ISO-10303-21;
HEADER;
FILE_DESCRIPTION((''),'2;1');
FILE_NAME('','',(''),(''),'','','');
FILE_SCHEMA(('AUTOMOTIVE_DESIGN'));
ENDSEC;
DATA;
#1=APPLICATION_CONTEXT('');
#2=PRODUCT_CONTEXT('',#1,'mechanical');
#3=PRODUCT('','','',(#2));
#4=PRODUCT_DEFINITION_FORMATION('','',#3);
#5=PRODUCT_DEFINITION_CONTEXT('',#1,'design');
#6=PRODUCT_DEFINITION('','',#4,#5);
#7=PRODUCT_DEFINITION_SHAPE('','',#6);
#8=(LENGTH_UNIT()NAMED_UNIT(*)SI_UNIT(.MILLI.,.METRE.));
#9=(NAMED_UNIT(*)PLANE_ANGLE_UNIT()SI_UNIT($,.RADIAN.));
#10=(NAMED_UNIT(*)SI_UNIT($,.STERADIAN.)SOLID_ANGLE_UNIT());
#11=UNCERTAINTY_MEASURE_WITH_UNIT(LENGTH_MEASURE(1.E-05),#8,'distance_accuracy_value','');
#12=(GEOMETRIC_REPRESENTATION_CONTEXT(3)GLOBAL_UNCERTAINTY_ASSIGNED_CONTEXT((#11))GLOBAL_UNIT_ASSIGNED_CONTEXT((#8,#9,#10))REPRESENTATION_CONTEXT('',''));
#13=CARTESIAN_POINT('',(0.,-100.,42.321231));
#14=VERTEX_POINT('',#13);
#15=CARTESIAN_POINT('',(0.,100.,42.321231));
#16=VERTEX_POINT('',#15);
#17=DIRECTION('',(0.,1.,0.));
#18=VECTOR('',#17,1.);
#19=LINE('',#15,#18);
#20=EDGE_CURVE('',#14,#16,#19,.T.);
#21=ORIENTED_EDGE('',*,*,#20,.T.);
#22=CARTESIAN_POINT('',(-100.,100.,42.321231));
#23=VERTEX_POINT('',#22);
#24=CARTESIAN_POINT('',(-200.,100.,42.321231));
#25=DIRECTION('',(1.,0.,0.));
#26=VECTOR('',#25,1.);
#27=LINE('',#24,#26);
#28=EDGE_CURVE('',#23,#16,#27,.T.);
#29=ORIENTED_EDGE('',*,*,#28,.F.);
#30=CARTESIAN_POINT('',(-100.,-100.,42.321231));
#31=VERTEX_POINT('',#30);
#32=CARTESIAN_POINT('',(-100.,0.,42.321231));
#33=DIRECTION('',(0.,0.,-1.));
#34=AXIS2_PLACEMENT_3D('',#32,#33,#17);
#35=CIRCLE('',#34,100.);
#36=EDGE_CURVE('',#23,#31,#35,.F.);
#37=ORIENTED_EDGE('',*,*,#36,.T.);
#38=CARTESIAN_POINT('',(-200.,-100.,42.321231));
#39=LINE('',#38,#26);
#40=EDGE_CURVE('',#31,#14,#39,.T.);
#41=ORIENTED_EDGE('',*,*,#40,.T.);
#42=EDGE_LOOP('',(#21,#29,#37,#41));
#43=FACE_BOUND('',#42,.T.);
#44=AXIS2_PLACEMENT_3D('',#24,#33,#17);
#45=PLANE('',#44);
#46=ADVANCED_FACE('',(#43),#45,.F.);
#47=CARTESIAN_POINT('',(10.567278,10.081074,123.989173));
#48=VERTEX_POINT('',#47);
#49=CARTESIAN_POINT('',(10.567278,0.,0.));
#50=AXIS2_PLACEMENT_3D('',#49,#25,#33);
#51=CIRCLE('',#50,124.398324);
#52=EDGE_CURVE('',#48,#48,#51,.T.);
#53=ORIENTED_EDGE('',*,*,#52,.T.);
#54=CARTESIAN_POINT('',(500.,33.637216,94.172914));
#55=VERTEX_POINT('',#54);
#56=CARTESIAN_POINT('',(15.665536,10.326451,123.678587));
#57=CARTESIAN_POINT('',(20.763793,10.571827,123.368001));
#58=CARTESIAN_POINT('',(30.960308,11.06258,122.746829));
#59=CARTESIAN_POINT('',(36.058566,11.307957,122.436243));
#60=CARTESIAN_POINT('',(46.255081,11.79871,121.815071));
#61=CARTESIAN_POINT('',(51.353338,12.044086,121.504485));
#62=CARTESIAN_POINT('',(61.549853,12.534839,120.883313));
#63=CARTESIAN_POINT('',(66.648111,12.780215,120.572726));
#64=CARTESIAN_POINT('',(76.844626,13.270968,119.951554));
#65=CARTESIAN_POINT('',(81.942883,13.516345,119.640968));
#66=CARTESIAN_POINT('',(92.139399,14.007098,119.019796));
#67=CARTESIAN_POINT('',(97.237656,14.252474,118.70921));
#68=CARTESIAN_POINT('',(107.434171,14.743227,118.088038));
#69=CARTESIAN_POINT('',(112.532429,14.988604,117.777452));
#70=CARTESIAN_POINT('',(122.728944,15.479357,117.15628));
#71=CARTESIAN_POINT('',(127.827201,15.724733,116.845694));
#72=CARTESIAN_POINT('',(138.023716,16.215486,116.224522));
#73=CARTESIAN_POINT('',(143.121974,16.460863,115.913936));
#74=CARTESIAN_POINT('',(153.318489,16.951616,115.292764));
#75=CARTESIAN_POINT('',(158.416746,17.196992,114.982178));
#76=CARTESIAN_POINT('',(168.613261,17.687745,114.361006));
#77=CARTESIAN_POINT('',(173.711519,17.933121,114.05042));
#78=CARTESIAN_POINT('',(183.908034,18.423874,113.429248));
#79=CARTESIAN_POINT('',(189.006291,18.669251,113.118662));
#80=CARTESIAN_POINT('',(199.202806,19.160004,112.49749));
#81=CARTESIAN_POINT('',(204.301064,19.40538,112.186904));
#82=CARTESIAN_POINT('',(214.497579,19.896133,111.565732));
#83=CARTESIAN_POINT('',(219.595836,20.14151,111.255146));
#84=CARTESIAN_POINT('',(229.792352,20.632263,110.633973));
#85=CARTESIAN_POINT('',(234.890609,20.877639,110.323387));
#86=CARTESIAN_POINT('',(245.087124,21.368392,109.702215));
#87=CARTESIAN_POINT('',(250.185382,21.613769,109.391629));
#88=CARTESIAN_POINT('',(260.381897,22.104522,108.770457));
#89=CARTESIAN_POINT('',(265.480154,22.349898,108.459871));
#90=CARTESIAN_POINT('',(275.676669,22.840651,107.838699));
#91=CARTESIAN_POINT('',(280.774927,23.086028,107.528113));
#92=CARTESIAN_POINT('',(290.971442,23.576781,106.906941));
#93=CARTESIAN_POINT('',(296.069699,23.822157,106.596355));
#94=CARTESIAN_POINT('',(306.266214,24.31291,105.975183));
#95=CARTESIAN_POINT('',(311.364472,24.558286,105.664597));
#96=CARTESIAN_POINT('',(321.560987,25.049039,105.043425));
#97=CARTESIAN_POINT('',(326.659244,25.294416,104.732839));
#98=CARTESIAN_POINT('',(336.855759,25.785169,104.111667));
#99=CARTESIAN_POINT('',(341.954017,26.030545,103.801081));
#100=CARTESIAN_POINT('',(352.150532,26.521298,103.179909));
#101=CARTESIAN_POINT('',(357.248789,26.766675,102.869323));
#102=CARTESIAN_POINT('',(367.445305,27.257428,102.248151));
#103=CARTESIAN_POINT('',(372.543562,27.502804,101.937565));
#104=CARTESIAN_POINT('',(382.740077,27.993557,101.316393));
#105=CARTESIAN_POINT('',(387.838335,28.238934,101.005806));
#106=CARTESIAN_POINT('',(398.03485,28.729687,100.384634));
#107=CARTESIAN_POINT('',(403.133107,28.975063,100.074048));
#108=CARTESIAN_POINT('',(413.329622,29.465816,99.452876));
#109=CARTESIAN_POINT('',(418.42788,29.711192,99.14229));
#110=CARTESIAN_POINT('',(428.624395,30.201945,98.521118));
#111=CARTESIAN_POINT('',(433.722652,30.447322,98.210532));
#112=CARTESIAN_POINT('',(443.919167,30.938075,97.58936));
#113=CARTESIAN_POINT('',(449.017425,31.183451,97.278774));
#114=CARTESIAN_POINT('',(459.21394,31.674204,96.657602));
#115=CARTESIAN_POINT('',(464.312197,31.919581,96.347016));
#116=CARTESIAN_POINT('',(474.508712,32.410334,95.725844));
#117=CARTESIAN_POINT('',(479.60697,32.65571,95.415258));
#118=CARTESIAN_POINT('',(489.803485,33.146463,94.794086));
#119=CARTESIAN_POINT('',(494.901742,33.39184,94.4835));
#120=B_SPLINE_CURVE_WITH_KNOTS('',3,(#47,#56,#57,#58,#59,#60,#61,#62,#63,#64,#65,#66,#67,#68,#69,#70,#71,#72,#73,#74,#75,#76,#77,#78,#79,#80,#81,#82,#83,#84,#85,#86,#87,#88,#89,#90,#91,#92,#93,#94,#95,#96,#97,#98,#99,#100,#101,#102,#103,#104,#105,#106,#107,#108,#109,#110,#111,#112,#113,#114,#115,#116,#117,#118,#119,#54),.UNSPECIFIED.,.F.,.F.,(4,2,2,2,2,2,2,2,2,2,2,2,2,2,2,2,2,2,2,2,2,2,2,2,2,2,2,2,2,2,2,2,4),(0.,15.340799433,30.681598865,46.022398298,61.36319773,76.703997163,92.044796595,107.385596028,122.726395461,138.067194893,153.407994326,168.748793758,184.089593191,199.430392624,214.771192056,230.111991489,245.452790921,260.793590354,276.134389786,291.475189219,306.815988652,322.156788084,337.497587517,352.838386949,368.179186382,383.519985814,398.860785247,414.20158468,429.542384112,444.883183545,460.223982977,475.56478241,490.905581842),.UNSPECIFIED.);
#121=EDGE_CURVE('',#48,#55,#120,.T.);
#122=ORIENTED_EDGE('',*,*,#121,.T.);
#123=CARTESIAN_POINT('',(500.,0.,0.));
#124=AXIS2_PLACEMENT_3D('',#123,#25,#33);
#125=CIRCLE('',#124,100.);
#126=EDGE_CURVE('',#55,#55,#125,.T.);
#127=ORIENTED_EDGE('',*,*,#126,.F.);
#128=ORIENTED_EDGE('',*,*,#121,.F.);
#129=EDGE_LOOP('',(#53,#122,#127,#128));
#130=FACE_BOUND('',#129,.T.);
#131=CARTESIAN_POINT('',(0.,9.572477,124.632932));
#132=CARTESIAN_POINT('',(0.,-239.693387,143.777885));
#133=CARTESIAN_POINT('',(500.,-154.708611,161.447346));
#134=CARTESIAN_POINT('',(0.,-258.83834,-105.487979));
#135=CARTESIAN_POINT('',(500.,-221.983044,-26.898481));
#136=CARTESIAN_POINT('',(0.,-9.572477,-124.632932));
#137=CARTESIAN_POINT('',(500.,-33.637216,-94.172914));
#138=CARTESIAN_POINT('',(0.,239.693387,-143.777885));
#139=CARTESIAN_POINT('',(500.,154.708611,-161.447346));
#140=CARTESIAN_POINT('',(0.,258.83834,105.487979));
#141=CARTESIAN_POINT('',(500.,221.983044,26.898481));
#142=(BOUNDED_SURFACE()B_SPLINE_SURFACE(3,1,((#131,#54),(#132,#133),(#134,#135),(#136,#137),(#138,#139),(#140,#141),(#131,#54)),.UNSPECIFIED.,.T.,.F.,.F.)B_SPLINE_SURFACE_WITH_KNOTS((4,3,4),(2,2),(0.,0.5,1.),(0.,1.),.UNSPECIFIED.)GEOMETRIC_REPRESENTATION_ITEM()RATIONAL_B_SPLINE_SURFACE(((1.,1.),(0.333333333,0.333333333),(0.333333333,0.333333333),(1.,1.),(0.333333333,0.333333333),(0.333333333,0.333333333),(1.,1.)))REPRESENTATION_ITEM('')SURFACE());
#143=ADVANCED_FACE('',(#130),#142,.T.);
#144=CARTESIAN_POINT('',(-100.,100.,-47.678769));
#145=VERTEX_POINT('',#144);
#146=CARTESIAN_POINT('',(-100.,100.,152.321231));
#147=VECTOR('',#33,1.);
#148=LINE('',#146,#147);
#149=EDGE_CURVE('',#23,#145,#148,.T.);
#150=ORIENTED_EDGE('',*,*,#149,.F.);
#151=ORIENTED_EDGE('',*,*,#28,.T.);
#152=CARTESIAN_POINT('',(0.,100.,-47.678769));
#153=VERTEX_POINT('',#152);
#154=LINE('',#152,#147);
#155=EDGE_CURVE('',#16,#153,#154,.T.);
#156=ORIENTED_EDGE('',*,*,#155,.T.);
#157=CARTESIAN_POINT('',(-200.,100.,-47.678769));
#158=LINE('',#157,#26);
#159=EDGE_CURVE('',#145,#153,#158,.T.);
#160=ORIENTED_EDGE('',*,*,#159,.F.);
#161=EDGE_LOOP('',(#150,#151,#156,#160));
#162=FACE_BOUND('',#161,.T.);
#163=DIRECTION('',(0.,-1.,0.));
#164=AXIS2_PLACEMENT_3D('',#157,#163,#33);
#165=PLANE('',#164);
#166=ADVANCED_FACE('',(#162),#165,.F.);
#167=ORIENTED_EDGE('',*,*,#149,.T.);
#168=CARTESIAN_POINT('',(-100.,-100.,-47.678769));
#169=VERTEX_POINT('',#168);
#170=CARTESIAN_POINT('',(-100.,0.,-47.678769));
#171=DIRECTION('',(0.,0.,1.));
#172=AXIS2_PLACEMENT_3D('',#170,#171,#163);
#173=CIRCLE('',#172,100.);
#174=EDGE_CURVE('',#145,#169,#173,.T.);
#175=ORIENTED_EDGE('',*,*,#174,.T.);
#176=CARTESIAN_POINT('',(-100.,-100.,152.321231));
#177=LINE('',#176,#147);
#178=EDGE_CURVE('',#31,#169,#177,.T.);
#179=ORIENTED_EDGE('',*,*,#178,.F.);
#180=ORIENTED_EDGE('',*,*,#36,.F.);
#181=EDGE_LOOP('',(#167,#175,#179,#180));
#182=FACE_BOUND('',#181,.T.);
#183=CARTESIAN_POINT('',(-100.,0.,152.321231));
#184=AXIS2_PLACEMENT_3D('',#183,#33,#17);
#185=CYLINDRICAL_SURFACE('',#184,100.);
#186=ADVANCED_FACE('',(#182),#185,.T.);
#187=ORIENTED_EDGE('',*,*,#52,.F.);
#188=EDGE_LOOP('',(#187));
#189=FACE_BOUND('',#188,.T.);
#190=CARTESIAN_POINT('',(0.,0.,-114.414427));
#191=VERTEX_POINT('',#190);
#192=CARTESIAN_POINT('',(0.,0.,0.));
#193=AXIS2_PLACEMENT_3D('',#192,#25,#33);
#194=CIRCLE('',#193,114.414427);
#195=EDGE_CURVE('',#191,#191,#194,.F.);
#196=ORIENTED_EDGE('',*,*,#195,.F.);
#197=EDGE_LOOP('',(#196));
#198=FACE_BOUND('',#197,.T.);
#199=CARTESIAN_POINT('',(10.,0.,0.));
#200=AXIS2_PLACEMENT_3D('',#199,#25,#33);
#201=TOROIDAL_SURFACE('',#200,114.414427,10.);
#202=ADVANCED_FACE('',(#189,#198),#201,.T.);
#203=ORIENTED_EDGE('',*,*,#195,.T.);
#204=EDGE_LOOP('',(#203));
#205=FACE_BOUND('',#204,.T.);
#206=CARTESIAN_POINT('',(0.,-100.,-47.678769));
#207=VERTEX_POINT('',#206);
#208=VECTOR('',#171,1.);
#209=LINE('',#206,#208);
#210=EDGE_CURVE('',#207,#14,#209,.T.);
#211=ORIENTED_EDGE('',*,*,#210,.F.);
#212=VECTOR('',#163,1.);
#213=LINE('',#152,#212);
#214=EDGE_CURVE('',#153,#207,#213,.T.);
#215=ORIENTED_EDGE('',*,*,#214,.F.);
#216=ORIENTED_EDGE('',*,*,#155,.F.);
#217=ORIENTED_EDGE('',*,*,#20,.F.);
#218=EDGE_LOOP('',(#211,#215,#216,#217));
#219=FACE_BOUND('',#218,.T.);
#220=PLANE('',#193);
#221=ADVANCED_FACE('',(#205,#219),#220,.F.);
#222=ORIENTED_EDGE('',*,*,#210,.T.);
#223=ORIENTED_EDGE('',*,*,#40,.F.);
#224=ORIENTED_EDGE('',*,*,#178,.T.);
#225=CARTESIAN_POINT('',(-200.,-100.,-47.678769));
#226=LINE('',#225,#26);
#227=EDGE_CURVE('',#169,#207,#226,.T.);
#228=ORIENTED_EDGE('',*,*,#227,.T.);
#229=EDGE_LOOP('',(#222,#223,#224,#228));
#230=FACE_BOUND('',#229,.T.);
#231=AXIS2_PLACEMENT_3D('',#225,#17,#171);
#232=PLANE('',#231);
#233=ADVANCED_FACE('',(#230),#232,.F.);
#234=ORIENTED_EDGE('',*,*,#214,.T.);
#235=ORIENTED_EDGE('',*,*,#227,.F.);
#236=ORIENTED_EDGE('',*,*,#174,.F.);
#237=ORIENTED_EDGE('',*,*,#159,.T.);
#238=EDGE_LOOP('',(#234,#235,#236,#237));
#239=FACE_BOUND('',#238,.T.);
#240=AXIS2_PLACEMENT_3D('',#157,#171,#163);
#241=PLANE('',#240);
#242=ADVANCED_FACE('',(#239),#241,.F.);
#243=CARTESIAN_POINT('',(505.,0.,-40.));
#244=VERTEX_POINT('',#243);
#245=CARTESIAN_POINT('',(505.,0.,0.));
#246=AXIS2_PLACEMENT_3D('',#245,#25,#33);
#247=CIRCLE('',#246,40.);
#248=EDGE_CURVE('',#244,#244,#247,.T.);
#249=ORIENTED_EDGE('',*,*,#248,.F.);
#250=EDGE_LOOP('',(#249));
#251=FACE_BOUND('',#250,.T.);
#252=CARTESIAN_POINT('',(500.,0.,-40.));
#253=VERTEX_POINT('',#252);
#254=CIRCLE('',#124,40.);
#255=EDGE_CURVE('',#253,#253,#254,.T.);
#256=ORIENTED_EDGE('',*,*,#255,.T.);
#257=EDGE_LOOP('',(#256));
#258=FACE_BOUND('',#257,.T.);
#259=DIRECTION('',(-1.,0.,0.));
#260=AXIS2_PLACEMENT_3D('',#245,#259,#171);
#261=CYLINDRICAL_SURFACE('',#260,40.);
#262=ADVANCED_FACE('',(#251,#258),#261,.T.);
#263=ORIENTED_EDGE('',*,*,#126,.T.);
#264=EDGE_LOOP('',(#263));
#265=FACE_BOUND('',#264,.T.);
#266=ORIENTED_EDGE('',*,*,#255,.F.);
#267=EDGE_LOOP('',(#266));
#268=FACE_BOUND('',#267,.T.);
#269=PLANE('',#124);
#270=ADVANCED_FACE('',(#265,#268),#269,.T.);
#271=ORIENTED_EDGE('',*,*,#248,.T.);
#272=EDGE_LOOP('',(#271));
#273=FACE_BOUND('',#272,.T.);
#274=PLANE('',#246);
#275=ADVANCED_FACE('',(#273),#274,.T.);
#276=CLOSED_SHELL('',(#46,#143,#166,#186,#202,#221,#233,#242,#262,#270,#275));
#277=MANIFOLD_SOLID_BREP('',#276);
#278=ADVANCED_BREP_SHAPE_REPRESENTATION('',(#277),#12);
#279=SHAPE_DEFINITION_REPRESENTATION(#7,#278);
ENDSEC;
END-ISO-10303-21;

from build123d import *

# Parameters (mm, degrees)
SKETCH17_W          = 90
SKETCH17_H          = 200
BOSS_EXTRUDE2_DEPTH = 200
CUT_EXTRUDE14_DEPTH = 200
FILLET1_R           = 10
SKETCH22_R          = 40
BOSS_EXTRUDE3_DEPTH = 5


with BuildPart() as part:
    # Loft5: read off the stored shape, not the designer's step
    # Loft5: loft between two sections, ruled curve by curve
    loft5_from = [
        Edge.make_bspline([(0, 9.572476569, 124.632931813), (0, -239.693387057, 143.777884951), (0, -258.838340195, -105.487978675), (0, -9.572476569, -124.632931813), (0, 239.693387057, -143.777884951), (0, 258.838340195, 105.487978675), (0, 9.572476569, 124.632931813)], [0, 0, 0, 0, 0.5, 0.5, 0.5, 1, 1, 1, 1], 3, [1, 0.333333333, 0.333333333, 1, 0.333333333, 0.333333333, 1]),
    ]
    loft5_to = [
        Edge.make_bspline([(500, 33.637216162, 94.172913775), (500, -154.708611388, 161.447346099), (500, -221.983043712, -26.898481451), (500, -33.637216162, -94.172913775), (500, 154.708611388, -161.447346099), (500, 221.983043712, 26.898481451), (500, 33.637216162, 94.172913775)], [0, 0, 0, 0, 0.5, 0.5, 0.5, 1, 1, 1, 1], 3, [1, 0.333333333, 0.333333333, 1, 0.333333333, 0.333333333, 1]),
    ]
    loft5 = Solid(Shell([*[Face.make_surface_from_curves(loft5_from[k], loft5_to[k]) for k in range(1)], Face(Wire(loft5_from)), Face(Wire(loft5_to))]))
    add(loft5)

    # Sketch17 → Boss-Extrude2 (add)
    with BuildSketch(Plane.ZY):
        with Locations((-2.678768884, 0)):
            Rectangle(SKETCH17_W, SKETCH17_H)
    extrude(amount=BOSS_EXTRUDE2_DEPTH)

    # Sketch21 → Cut-Extrude14 (cut)
    with BuildSketch(Plane(origin=(0, 0, -47.678768884), x_dir=(-1, 0, 0), z_dir=(0, 0, -1))):
        with BuildLine():
            Line((100, 100), (100, 139.740536385))
            Line((100, 139.740536385), (237.040054467, 139.740536385))
            Line((237.040054467, 139.740536385), (237.040054467, -127.442216689))
            Line((237.040054467, -127.442216689), (100, -127.442216689))
            Line((100, -127.442216689), (100, -100))
            ThreePointArc((100, -100), (200, 0), (100, 100))
        make_face()
    extrude(amount=-CUT_EXTRUDE14_DEPTH, mode=Mode.SUBTRACT)

    # Fillet1
    fillet1_edges = [part.edges().sort_by_distance(p)[0] for p in [
        (0, -9.572476569, -124.632931813),
    ]]
    fillet(fillet1_edges, radius=FILLET1_R)

    # Sketch22 → Boss-Extrude3 (add)
    with BuildSketch(Plane(origin=(500, 0, 0), x_dir=(0, 0, -1), z_dir=(1, 0, 0))):
        Circle(SKETCH22_R)
    extrude(amount=BOSS_EXTRUDE3_DEPTH)


solid = part.part
